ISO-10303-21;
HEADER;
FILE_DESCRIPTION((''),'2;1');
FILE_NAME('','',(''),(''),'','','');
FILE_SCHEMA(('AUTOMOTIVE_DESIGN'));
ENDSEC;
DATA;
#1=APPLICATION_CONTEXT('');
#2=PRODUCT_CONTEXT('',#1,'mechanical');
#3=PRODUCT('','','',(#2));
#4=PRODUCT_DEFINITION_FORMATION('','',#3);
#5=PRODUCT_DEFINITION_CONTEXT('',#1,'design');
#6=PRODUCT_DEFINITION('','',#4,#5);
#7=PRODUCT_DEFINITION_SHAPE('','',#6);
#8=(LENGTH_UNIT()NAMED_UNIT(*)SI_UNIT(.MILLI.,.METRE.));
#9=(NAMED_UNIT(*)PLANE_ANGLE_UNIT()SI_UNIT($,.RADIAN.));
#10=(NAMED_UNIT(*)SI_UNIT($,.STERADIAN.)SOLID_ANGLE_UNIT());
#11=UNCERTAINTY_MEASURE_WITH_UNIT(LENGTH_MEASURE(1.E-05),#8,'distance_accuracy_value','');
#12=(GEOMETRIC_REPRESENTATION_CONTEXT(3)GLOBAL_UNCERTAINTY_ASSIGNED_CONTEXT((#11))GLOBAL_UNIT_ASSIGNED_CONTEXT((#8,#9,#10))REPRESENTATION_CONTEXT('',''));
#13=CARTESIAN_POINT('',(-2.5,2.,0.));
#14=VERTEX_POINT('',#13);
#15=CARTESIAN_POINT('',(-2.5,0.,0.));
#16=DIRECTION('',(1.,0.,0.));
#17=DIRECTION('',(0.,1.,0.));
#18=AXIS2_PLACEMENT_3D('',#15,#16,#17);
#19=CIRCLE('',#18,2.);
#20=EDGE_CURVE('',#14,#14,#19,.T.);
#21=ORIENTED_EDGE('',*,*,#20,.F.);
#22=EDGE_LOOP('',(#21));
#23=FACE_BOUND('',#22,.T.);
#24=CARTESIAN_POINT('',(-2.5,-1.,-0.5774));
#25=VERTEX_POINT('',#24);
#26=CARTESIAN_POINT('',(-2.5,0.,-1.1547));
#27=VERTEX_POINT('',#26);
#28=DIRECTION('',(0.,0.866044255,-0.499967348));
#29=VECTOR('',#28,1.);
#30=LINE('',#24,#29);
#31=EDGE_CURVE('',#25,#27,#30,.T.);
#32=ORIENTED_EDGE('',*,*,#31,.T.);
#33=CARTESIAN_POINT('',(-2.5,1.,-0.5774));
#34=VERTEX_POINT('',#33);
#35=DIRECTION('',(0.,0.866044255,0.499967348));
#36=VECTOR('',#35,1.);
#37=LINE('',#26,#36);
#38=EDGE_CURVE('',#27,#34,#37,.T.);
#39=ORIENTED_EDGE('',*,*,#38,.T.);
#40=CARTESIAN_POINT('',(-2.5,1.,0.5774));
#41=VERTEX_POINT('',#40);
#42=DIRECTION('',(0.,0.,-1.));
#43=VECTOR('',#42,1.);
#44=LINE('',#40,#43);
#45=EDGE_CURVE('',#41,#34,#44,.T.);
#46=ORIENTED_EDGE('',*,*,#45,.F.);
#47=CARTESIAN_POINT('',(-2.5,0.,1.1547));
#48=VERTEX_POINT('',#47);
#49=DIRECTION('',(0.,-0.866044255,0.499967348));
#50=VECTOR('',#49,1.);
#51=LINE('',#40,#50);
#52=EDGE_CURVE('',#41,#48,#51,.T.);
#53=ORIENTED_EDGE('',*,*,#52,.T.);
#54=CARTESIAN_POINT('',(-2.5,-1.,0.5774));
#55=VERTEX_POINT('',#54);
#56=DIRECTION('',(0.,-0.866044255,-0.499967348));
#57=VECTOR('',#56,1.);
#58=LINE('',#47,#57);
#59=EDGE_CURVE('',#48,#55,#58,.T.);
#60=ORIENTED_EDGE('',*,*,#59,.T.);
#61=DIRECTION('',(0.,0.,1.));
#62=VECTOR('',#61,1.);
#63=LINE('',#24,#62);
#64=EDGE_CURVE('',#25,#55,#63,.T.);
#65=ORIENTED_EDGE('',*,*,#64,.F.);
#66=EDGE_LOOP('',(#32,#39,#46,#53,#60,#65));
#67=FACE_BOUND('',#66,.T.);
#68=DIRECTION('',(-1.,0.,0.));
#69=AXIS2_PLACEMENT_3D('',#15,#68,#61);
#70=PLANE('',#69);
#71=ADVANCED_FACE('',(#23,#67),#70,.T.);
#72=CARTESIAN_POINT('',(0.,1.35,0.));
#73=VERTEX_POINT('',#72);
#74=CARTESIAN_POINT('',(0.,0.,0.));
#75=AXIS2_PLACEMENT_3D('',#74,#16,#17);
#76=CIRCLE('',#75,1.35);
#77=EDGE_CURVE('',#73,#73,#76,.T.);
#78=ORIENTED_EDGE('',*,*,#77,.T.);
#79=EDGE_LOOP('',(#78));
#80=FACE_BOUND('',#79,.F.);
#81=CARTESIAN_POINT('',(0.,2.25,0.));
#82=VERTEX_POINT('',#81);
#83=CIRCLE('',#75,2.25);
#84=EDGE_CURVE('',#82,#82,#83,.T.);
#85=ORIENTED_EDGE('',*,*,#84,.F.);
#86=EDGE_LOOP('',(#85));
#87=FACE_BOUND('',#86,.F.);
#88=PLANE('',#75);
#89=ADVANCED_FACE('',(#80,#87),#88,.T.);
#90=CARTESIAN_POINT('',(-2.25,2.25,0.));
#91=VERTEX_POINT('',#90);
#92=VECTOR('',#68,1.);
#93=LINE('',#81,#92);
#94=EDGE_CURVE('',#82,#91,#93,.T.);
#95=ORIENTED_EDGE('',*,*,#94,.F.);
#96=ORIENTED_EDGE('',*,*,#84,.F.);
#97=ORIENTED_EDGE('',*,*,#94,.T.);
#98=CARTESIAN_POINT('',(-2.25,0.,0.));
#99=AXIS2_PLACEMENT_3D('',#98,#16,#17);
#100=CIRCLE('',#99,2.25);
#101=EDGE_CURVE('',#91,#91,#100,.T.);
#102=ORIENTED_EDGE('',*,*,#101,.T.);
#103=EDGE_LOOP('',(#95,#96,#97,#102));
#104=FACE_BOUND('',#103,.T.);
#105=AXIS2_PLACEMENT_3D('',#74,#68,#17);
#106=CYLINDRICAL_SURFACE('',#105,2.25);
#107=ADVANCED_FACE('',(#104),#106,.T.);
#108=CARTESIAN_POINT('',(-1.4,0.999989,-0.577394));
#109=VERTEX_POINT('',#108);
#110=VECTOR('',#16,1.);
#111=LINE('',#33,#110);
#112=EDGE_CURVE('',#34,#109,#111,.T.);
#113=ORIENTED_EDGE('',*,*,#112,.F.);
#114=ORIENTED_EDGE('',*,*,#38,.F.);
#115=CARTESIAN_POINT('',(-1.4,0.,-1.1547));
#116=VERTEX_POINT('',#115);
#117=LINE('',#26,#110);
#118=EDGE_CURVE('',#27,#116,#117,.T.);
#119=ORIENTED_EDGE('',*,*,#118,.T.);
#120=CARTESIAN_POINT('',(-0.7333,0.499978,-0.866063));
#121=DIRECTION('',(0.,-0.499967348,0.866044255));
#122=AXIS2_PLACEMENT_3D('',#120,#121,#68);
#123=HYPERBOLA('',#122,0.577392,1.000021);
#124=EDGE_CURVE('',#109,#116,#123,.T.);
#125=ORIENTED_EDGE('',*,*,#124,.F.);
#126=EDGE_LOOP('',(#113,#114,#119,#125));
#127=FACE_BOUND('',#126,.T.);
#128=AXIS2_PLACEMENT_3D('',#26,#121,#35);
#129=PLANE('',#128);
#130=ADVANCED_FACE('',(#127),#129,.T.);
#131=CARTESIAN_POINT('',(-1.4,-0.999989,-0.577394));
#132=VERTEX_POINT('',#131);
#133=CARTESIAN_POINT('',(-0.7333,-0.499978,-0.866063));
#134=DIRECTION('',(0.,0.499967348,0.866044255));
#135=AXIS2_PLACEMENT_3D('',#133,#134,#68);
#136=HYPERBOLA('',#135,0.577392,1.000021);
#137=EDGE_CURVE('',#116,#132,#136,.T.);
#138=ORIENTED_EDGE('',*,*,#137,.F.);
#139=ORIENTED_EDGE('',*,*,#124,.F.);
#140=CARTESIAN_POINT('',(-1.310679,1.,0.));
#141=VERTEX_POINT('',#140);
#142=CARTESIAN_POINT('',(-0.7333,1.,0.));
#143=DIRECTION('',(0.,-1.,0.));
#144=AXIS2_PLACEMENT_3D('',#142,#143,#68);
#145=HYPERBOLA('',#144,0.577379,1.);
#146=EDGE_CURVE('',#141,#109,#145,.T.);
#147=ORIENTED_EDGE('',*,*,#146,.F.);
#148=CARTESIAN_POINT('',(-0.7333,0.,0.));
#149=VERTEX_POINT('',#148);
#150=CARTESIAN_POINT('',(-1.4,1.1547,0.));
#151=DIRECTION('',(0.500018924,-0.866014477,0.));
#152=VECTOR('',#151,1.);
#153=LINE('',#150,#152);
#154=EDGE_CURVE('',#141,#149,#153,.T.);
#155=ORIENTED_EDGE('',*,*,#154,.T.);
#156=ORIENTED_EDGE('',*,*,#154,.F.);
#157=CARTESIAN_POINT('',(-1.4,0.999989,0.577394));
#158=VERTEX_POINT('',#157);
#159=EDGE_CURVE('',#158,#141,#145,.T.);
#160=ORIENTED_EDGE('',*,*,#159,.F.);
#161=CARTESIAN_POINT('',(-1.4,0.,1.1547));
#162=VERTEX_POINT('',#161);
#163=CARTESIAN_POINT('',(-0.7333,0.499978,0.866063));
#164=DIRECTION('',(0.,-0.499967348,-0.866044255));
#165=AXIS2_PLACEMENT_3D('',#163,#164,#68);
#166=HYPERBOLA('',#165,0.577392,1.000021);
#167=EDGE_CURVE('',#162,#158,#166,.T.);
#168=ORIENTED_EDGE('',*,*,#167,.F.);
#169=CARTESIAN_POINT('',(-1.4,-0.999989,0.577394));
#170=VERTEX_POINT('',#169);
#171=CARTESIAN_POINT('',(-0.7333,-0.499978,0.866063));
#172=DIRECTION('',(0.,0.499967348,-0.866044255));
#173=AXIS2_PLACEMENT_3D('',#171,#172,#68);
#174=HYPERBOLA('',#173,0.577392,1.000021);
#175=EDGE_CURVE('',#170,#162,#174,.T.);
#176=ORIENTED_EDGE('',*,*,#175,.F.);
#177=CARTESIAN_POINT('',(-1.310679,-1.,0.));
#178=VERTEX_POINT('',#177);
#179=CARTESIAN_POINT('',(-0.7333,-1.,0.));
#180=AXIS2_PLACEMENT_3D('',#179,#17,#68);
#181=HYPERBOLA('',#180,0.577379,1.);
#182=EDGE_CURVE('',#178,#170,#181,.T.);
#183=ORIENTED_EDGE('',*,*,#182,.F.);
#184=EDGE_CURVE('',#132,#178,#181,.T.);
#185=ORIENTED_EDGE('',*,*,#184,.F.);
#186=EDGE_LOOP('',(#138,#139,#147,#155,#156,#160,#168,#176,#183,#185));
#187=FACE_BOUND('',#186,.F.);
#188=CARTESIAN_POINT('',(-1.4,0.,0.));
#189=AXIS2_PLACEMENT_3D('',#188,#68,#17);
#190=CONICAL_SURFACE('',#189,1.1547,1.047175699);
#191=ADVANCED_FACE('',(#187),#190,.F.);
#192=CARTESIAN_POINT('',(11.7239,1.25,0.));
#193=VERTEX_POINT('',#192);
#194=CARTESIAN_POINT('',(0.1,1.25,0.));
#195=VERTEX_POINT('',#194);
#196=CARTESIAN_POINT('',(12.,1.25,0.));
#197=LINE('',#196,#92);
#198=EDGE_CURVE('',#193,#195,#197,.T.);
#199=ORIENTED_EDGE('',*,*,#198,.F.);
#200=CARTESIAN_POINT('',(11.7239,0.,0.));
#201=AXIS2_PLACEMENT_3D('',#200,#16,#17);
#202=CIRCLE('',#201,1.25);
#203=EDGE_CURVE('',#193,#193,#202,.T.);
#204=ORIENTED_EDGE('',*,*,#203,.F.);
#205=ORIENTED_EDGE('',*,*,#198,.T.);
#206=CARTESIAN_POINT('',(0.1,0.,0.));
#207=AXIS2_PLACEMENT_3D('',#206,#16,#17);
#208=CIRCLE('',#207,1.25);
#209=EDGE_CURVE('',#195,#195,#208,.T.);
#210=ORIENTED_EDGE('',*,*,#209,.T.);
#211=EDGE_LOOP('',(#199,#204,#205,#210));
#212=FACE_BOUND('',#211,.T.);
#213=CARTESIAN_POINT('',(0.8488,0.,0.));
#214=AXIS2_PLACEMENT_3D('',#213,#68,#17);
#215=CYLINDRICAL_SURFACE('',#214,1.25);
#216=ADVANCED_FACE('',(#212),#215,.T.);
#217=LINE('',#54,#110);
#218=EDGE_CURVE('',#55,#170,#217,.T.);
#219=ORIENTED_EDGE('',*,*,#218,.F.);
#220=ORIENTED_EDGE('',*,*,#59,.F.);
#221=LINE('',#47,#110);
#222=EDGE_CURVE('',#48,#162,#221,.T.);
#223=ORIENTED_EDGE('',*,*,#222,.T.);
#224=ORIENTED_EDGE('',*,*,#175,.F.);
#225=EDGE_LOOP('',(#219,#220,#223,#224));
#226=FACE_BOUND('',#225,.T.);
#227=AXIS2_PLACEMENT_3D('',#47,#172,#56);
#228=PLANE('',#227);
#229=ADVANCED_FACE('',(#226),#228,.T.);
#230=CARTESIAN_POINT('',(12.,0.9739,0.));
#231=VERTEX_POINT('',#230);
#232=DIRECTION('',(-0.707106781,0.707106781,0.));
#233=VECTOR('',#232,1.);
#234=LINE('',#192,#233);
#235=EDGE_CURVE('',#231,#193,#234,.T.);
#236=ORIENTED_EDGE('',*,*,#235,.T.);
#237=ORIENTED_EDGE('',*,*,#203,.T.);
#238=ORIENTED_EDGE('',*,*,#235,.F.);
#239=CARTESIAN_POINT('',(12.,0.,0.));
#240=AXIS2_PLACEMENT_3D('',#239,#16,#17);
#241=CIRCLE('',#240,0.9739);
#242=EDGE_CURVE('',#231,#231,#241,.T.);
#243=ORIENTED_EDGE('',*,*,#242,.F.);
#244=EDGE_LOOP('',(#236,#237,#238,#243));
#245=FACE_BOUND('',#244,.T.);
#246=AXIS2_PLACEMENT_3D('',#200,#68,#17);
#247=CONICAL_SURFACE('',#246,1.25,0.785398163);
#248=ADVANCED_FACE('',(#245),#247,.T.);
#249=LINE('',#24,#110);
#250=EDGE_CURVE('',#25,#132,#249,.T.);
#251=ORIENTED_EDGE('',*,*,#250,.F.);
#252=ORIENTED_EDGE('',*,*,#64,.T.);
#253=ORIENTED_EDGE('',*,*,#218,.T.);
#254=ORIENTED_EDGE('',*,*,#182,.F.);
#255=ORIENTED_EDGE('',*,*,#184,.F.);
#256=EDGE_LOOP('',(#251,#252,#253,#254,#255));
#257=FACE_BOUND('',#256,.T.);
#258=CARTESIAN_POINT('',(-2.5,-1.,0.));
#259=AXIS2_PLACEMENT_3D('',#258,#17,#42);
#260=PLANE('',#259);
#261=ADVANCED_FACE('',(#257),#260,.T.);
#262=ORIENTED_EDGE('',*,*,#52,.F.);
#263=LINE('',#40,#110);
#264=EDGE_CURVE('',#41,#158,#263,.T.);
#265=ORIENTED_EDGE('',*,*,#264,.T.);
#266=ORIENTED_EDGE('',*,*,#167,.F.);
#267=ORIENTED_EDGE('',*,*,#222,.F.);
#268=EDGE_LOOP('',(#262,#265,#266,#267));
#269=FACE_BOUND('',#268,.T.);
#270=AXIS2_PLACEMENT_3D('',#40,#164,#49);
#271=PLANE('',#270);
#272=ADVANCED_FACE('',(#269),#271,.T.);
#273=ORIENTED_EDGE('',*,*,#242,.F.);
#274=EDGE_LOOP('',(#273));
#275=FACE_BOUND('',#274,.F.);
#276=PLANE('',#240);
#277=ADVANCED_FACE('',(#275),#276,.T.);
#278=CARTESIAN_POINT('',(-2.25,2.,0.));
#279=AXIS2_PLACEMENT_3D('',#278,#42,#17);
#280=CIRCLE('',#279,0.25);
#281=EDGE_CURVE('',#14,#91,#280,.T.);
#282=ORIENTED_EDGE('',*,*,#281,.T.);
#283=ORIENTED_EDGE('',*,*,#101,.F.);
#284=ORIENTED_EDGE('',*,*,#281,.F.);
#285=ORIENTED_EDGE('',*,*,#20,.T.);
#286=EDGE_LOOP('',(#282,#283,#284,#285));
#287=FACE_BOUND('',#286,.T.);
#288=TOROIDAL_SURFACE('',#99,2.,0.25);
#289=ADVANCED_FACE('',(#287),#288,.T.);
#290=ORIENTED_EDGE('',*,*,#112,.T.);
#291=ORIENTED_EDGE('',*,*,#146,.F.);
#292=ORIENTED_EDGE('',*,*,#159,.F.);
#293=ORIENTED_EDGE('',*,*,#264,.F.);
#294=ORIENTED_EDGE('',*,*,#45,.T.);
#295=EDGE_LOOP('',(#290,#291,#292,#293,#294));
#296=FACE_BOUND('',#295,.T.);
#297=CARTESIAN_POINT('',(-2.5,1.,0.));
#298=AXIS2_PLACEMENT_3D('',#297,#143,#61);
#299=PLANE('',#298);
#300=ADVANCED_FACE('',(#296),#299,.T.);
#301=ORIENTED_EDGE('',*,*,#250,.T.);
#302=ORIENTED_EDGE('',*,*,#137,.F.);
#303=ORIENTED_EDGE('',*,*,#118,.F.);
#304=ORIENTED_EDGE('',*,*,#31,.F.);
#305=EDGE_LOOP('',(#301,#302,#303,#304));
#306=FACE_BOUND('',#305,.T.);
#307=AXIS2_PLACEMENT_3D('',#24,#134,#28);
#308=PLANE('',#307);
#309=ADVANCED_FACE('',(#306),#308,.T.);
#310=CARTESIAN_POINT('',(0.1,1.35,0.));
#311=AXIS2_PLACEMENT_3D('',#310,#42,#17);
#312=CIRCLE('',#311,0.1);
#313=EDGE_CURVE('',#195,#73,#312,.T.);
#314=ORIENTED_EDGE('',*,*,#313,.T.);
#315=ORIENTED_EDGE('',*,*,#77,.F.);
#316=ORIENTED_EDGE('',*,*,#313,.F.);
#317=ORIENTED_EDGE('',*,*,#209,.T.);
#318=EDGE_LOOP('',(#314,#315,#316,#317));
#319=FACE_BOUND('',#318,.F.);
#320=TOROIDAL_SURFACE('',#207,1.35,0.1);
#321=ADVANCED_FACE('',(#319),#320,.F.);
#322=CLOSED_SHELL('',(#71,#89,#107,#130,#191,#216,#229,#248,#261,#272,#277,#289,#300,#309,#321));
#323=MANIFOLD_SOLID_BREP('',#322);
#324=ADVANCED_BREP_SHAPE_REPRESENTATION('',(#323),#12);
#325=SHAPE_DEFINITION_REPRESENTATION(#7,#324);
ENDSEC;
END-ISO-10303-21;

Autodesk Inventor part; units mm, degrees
ref_plane "YZ Plane" through (0, 0, 0) normal (1, 0, 0) x (0, 1, 0)
ref_plane "XZ Plane" through (0, 0, 0) normal (0, 1, 0) x (-1, 0, 0)
sketch "Sketch1" plane through (0, 0, 0) normal (0, 0, 1) x (1, 0, 0)
  line L0 (-0.7333, 0) -> (12, 0)
  line L1 (12, 0) -> (12, 1.25)
  line L2 (12, 1.25) -> (1.125, 1.25)
  line L3 (1.125, 1.25) -> (0.8488, 1.25)
  line L4 (0.8488, 1.25) -> (0, 1.25)
  line L5 (0, 1.25) -> (0, 2.25)
  line L6 (0, 2.25) -> (-2.5, 2.25)
  line L7 (-2.5, 2.25) -> (-2.5, 1.1547)
  line L8 (-2.5, 1.1547) -> (-1.4, 1.1547)
  line L9 (-1.4, 1.1547) -> (-0.7333, 0)
  line L10 (-5.4, 0) -> (14.9, 0) projected
  line L11 (0, -0.45) -> (0, 2.7) projected
  line L12 (1.125, 1.25) -> (0, 1.25) construction
  dimension "d1" = 10.875
  dimension "d2" = 0.2762
  dimension "d3" = 2.5
  dimension "d4" = 1.1
  dimension "d5" = 60
  dimension "d6" = 2.5
  dimension "d7" = 2.5
  dimension "d8" = 2.3094
  dimension "d9" = 4.5
  dimension "d26" = 12
revolve "Body" add sketch "Sketch1" angle 360 about axis through (-0.7333, 0, 0) along (1, 0, 0)
sketch "Sketch2" plane through (-2.5, 0, 0) normal (-1, 0, 0) x (0, 0, 1)
  circle A0 centre (0, 0) radius 1.1547 projected
  line L0 (0, -3.15) -> (0, 3.15) projected
  line L1 (-3.15, 0) -> (3.15, 0) projected
  line L2 (1.1547, 0) -> (0.5774, -1)
  line L3 (0.5774, -1) -> (-0.5774, -1)
  line L4 (-0.5774, -1) -> (-1.1547, 0)
  line L5 (-1.1547, 0) -> (-0.5774, 1)
  line L6 (-0.5774, 1) -> (0.5774, 1)
  line L7 (0.5774, 1) -> (1.1547, 0)
extrude "Slot" add sketch "Sketch2" against normal up to next contours L7 A0 | A0 L2 | L6 L0 A0 | A0 L0 L3 | L0 L6 A0 | A0 L3 L0 | L4 A0 | A0 L5
fillet "Fillet1" radius 0.25 1 edges at (-2.5, -2.25, 0)
thread "Thread" size "M2.5x0.45" class "6g" standard "ISO Metric profile" length 10.875
chamfer "Chamfer1" distance 0.2761 distance2 0.2761 1 edges at (12, -1.25, 0) measured on face at (12, -0.2714, -0.6096)
ref_plane "Work Plane1" through (29, 0, 0) normal (0, -1, 0) x (1, 0, 0)
fillet "Fillet2" radius 0.1 1 edges at (0, -1.25, 0)
equation "\"d30\" = R"
equation "\"d17\" = RR"
equation "\"d13\" = GEL"
equation "\"d15\" = -0.5 * SPD + 0.5 * GD"
equation "\"d16\" = GUL"
equation "\"d1\" = GEL"
equation "\"d3\" = KOH"
equation "\"d4\" = INTI"
equation "\"d6\" = GD"
equation "\"d7\" = BDM"
equation "\"d8\" = 1.1547 * SW"
equation "\"d9\" = KOD"
equation "\"d26\" = NLG"
equation "\"GD\" = NND"
equation "\"NLG\" = 12"
equation "\"GEL\" = 10.875"
equation "\"KOD\" = 4.5"
equation "\"KOH\" = 2.5"
equation "\"INTI\" = 1.1"
equation "\"GAL\" = 0.61345 * PTC"
equation "\"GUL\" = 0.61345 * PTC"
equation "\"BDM\" = NND"
equation "\"SW\" = 2"
equation "\"RR\" = 0.25"
equation "\"SPD\" = NND - 1.2269 * PTC"
equation "\"R\" = 0.1"
equation "\"TOA\" = 30deg"
equation "\"GD1\" = THREADDIA - 1.2269 * PTC"
equation "\"THREADDIA\" = 2.5"
equation "\"FAWI\" = 45deg"
equation "\"ANG\" = 120deg"
equation "\"PTC\" = 0.45"
equation "\"NND\" = 2.5"
equation "\"E0\" = 1.155 * SW"
properties part number "DIN 912 - M2.5 x 12" material "Steel, Mild"
